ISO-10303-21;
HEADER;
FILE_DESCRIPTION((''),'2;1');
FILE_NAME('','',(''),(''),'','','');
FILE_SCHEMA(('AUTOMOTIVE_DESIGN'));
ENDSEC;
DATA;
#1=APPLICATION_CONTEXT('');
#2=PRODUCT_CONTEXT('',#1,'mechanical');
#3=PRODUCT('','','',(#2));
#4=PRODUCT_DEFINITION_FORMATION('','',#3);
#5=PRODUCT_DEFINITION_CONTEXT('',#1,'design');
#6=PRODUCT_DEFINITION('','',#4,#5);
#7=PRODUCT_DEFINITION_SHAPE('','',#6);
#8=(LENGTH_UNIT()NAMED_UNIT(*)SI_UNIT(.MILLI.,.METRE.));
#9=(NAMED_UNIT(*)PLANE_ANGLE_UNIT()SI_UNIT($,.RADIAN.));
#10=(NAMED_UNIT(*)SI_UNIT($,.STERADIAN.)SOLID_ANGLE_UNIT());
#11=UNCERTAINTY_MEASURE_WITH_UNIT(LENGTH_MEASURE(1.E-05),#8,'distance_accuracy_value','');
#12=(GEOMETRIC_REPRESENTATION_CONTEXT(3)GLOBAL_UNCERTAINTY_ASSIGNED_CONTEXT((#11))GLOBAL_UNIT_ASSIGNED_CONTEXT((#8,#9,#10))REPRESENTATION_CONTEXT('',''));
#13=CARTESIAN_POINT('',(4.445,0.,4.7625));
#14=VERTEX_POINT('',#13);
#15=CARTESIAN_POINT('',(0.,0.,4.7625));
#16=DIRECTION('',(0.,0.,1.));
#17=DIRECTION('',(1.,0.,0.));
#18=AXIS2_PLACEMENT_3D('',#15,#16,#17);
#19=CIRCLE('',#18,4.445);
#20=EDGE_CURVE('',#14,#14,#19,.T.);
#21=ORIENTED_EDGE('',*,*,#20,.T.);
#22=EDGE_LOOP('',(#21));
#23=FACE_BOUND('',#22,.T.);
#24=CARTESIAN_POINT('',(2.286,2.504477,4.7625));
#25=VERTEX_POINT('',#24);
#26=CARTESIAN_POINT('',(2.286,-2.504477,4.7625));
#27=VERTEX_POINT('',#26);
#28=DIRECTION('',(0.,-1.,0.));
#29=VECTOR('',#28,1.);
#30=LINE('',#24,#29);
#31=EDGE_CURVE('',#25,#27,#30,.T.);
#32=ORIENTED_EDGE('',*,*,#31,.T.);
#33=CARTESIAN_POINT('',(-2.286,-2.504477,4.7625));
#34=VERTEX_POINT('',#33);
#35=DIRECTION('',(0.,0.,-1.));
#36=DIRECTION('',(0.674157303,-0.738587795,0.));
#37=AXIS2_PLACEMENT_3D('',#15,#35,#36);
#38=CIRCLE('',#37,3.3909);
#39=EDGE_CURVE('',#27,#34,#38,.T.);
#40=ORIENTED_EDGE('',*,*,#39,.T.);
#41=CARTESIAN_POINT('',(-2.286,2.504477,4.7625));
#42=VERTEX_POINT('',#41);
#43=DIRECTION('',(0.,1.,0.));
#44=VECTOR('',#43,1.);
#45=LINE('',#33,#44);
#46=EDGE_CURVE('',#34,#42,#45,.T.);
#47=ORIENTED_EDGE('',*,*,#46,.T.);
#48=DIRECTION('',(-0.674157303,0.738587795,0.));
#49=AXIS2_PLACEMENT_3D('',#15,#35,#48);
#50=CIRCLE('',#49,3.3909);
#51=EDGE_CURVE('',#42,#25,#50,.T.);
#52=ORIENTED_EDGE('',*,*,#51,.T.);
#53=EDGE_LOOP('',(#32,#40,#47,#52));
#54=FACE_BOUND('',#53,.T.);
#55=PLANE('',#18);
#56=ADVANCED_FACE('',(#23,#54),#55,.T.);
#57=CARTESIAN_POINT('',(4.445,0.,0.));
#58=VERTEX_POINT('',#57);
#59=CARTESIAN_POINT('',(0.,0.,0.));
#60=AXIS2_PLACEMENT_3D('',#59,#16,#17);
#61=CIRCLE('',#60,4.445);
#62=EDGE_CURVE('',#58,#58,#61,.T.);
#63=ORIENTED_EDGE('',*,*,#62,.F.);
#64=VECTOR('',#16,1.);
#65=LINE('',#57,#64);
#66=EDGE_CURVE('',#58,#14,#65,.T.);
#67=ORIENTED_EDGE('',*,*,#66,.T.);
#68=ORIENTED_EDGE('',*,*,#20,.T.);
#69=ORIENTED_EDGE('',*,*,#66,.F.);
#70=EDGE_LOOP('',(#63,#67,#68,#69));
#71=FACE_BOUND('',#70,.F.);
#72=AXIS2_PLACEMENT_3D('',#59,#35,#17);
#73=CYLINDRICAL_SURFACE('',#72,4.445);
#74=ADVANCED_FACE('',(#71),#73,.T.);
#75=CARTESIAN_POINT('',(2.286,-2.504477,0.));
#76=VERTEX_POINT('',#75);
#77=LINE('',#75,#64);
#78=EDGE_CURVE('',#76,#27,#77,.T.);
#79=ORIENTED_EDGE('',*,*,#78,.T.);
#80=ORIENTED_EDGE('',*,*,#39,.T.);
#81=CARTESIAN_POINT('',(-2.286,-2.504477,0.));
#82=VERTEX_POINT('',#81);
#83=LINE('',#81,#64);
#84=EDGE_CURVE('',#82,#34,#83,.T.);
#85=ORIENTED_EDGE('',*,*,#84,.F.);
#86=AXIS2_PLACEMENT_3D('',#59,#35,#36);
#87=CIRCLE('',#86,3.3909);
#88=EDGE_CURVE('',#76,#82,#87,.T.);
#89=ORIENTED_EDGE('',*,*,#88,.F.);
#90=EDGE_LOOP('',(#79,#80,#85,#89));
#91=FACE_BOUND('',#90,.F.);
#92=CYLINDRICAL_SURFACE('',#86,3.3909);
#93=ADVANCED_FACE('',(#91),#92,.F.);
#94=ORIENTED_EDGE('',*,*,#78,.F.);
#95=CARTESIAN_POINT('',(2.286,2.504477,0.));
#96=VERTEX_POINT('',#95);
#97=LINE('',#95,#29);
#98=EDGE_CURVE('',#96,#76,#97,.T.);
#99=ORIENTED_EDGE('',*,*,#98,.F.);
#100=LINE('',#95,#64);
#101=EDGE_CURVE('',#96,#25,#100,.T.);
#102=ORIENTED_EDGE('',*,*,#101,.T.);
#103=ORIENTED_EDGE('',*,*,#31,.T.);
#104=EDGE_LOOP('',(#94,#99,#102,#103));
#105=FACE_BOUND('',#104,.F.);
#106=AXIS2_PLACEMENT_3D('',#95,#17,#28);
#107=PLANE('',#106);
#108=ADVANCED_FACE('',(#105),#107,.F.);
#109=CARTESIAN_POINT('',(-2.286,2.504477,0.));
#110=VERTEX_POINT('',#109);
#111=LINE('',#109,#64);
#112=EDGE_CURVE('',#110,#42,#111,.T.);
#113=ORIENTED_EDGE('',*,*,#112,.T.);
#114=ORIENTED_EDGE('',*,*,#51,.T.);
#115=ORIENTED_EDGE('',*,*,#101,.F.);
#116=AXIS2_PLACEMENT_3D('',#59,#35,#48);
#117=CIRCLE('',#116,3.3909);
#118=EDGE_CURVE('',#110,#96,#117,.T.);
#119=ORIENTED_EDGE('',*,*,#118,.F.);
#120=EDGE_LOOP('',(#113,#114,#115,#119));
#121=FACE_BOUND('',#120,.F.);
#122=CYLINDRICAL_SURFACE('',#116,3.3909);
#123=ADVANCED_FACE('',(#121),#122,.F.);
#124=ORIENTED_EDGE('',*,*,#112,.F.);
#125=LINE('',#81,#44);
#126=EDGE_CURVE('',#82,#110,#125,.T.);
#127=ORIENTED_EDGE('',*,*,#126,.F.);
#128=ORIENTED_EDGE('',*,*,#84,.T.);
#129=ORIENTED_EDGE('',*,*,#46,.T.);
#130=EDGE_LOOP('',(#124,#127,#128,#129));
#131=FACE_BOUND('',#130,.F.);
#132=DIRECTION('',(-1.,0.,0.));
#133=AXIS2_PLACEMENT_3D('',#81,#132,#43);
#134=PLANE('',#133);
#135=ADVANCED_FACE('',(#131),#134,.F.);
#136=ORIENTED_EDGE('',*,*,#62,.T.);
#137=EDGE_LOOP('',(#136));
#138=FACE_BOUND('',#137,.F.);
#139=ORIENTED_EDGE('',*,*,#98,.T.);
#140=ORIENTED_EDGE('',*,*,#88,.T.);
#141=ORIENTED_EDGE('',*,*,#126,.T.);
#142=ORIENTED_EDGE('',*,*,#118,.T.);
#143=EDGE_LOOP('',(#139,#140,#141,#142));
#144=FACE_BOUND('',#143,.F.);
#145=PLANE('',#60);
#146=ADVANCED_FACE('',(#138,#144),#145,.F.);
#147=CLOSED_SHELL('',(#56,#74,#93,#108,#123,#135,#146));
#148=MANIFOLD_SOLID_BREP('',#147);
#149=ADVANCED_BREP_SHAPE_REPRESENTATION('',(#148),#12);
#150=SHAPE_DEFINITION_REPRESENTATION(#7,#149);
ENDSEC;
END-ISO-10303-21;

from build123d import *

# Parameters (mm, degrees)
F0_R     = 4.445
F1_DEPTH = 4.7625


# Not quite as in the source:
# - a length typed as a fraction of an inch, garbled in the dataset ("3 / 203.2 mm" for 3/8 in), is restored


with BuildPart() as f1:
    # F0 (on Top) → F1 (new body)
    with BuildSketch(Plane.XY):
        Circle(F0_R)
        with BuildLine():
            ThreePointArc((2.286, 2.5044773527), (3.1024023119, 1.3686864889), (3.3909, 0))
            ThreePointArc((3.3909, 0), (3.1024023119, -1.3686864889), (2.286, -2.5044773527))
            ThreePointArc((2.286, -2.5044773527), (0, -3.3909), (-2.286, -2.5044773527))
            ThreePointArc((-2.286, -2.5044773527), (-3.3909, 0), (-2.286, 2.5044773527))
            ThreePointArc((-2.286, 2.5044773527), (0, 3.3909), (2.286, 2.5044773527))
        make_face(mode=Mode.SUBTRACT)
        with BuildLine():
            Line((-2.286, -2.5044773527), (-2.286, 2.5044773527))
            ThreePointArc((-2.286, 2.5044773527), (-3.3909, 0), (-2.286, -2.5044773527))
        make_face()
        with BuildLine():
            ThreePointArc((2.286, -2.5044773527), (3.1024023119, -1.3686864889), (3.3909, 0))
            ThreePointArc((3.3909, 0), (3.1024023119, 1.3686864889), (2.286, 2.5044773527))
            Line((2.286, 2.5044773527), (2.286, -2.5044773527))
        make_face()
    extrude(amount=F1_DEPTH)


solid = f1.part
